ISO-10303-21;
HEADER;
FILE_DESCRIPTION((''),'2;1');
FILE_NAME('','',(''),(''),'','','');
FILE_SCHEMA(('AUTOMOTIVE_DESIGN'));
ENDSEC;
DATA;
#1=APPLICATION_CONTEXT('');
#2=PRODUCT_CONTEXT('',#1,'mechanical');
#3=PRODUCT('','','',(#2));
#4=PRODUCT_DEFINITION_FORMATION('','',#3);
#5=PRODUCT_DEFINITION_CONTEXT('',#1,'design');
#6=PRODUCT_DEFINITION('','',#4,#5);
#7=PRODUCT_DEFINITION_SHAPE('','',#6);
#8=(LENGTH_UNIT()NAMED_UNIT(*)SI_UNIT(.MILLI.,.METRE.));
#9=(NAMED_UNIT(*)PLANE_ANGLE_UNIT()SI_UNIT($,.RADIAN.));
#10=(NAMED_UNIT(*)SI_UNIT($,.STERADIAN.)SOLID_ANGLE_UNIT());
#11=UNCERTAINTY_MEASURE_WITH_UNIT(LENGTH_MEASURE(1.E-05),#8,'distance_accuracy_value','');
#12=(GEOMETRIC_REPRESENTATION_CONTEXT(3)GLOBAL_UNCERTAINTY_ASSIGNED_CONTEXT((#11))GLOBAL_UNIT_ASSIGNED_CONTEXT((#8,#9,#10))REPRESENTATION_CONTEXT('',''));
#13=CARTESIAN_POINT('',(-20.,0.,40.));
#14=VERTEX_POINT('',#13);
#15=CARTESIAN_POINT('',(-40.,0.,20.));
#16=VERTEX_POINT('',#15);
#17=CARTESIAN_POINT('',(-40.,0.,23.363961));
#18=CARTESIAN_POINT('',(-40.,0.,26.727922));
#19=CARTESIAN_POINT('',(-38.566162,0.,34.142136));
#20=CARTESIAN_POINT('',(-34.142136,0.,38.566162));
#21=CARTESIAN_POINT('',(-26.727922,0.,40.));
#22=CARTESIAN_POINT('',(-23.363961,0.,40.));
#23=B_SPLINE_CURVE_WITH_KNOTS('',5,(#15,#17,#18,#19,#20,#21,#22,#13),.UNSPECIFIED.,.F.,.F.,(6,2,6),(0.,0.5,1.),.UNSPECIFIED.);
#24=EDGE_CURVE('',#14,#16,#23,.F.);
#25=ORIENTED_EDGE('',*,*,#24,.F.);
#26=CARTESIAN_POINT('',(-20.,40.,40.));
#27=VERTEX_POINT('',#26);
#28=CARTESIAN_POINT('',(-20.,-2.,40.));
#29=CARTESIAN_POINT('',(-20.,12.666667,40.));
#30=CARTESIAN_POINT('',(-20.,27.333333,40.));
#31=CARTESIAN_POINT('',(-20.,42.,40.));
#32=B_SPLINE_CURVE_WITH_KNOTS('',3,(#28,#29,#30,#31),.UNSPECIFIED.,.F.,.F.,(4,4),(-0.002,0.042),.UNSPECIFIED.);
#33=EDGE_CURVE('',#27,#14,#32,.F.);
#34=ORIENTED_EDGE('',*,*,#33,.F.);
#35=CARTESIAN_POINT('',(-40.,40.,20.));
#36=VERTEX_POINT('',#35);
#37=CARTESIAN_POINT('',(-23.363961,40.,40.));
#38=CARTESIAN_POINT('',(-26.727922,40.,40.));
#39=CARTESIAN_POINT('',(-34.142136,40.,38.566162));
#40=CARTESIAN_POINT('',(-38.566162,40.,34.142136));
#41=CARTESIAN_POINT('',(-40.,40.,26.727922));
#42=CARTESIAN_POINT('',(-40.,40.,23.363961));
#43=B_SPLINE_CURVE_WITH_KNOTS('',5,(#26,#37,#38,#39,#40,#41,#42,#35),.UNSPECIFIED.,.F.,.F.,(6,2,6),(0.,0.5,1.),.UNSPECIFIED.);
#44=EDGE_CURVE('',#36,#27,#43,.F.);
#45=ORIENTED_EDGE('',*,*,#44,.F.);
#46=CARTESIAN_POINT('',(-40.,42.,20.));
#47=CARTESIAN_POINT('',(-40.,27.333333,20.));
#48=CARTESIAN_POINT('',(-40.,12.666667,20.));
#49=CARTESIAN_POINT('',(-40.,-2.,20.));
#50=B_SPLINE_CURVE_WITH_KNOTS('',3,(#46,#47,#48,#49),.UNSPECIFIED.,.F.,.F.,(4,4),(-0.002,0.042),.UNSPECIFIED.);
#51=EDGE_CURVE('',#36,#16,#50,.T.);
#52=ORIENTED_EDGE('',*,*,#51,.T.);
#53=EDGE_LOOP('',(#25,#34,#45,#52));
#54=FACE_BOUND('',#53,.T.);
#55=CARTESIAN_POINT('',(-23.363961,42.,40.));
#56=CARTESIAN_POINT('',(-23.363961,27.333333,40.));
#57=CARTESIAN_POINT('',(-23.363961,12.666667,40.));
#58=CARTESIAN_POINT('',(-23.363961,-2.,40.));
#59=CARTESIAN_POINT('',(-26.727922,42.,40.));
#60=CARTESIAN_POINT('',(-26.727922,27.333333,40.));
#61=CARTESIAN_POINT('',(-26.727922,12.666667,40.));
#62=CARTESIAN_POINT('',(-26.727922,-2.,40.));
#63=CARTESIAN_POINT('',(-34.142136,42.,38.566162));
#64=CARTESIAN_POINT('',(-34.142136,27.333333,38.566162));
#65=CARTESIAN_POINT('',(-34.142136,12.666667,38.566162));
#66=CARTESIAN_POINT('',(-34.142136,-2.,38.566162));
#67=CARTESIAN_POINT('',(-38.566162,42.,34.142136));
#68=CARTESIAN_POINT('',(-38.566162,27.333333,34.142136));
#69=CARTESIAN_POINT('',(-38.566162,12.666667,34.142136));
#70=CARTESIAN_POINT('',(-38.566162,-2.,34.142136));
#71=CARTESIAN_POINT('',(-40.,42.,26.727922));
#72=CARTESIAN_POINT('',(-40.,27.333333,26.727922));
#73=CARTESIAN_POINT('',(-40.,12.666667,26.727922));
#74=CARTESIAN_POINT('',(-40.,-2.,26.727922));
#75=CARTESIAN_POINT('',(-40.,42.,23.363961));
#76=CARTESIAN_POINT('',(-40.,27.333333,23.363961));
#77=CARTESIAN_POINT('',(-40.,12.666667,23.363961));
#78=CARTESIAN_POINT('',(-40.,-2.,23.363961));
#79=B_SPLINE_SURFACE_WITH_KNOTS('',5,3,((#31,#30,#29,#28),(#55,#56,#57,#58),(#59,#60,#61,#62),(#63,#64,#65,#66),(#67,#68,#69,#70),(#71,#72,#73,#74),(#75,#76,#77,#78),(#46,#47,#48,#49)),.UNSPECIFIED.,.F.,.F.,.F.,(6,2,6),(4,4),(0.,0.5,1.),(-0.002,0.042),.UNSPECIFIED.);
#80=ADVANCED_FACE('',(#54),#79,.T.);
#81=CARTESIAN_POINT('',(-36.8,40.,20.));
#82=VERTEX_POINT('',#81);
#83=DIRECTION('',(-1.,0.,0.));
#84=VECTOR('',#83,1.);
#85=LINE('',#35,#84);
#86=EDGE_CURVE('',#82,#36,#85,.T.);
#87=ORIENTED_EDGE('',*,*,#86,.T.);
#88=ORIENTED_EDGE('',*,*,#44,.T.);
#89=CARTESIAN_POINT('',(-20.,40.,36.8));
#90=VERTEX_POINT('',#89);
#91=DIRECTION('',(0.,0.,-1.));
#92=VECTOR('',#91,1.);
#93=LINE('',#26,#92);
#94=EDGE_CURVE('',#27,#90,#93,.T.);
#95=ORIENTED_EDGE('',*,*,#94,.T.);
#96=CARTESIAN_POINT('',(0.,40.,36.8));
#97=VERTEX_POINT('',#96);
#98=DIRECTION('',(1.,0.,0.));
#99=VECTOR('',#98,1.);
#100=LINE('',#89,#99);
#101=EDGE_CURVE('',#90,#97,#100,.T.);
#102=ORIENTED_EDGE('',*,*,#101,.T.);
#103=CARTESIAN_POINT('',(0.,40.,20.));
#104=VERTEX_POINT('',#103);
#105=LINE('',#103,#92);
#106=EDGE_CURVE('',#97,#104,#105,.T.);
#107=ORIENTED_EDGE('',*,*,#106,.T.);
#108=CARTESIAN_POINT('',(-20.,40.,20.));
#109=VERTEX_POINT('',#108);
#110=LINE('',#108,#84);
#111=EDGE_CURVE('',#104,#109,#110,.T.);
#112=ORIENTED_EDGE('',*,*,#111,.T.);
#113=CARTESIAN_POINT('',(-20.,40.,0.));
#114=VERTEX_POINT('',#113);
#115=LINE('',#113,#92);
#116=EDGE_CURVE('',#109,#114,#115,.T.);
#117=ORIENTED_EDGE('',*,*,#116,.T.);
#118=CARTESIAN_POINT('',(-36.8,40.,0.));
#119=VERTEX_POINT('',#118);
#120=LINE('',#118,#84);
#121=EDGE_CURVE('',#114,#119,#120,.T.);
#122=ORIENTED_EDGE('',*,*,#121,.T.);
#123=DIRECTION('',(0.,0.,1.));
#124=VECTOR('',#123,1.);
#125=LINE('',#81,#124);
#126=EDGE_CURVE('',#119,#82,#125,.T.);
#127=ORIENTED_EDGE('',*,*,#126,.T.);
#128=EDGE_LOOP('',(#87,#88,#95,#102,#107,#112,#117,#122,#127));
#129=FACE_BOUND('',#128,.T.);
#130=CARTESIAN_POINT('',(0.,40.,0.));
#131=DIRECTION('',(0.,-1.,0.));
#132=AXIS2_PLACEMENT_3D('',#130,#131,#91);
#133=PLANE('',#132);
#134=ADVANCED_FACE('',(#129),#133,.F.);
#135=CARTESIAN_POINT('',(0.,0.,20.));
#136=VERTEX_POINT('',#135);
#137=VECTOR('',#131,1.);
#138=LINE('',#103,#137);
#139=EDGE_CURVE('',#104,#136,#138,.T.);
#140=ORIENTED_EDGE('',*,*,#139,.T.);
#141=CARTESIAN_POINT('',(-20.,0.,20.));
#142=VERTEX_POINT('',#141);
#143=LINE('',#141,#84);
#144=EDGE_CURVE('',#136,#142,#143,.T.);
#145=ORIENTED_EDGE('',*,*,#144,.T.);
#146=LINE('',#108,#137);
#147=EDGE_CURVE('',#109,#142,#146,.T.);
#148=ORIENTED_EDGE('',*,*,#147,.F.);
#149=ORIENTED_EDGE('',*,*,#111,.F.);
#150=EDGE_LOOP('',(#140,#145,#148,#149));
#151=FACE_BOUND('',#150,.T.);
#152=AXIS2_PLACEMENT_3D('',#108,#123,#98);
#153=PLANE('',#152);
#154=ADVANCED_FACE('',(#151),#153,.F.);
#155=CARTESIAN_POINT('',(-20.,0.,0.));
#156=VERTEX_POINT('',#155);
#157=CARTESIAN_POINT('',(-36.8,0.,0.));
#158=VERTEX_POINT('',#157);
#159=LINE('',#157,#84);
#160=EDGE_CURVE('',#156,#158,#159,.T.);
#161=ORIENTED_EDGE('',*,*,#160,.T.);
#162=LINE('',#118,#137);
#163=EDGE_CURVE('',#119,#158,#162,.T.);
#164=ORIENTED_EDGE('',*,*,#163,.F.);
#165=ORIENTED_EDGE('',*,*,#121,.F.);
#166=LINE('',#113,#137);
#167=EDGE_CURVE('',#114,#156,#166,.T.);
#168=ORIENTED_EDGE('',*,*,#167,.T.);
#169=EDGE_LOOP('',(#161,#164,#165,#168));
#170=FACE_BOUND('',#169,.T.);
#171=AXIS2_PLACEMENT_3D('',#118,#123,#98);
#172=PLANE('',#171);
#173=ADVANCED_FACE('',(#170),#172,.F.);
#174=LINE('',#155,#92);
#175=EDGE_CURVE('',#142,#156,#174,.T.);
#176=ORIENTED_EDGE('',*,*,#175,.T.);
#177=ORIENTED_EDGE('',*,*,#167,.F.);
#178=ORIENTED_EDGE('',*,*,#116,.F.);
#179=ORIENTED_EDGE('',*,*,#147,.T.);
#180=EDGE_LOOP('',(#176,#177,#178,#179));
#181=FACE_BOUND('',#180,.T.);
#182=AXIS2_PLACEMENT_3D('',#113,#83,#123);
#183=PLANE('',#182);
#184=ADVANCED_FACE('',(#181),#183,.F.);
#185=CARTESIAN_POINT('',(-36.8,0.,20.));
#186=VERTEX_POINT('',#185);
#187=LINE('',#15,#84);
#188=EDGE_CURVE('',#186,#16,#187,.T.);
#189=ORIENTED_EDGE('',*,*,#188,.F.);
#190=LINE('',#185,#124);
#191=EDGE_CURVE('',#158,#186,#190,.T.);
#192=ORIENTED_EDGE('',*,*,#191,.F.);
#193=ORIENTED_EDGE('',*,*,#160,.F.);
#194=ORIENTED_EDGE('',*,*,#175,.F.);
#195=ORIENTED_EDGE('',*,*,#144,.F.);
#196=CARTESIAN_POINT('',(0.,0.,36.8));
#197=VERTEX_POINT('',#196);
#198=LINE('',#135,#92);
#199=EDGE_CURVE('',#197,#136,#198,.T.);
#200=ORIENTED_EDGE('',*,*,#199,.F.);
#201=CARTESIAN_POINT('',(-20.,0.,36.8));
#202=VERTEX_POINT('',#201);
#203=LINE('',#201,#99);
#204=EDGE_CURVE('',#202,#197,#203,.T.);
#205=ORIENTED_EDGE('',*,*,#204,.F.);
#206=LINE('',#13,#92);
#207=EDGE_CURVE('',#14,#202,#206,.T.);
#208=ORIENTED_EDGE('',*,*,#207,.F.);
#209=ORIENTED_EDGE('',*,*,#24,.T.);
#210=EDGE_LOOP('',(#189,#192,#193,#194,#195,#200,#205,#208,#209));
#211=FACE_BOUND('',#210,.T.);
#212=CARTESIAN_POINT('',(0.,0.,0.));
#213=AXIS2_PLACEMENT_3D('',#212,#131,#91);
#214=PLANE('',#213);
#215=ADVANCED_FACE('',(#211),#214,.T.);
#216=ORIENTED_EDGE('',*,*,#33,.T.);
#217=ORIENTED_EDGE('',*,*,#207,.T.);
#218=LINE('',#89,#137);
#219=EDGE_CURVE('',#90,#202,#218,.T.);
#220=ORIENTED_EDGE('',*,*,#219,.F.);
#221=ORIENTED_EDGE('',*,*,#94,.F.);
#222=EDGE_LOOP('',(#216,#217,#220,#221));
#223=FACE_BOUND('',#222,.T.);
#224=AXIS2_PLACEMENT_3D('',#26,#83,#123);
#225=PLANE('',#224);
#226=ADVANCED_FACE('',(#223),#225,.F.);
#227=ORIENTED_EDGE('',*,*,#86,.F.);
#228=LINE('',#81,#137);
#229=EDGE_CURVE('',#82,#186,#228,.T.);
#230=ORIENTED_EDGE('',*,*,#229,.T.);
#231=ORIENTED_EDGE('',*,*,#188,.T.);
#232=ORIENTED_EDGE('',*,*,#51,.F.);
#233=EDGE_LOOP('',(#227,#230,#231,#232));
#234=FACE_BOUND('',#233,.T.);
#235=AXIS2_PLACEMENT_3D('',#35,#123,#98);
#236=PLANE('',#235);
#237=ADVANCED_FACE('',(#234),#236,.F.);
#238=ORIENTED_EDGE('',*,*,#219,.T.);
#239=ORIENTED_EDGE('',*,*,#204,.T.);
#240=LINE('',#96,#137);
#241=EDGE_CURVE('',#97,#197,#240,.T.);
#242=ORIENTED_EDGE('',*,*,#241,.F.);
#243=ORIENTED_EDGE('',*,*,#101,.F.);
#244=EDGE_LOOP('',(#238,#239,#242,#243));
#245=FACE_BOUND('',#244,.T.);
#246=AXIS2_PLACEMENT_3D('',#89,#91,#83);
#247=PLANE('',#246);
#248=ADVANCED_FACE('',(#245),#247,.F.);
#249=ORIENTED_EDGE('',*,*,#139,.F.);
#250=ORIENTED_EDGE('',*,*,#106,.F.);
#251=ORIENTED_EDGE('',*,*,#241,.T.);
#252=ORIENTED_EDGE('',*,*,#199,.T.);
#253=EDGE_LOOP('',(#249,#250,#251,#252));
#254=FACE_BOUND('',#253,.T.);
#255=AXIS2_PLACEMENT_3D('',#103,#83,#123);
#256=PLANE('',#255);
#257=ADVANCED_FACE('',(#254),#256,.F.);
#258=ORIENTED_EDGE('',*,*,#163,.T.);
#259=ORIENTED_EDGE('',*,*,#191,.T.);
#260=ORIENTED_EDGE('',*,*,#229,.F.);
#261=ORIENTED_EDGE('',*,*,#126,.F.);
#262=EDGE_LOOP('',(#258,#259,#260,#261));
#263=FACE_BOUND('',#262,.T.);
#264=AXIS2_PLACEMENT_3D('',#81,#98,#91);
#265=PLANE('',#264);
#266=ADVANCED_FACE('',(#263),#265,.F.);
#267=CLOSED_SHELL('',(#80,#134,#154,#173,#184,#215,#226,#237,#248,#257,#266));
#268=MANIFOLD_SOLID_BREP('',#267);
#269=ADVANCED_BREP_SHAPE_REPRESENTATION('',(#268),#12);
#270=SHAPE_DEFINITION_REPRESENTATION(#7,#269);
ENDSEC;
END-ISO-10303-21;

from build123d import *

# Parameters (mm, degrees)
BOSS_EXTRUDE1_DEPTH = 40
FILLET1_SIZE        = 20


with BuildPart() as part:
    # Sketch2 → Boss-Extrude1 (new body)
    with BuildSketch(Plane(origin=(0, 0, 0), x_dir=(1, 0, 0), z_dir=(0, 1, 0))):
        Polygon((-20, -40), (-20, -36.8), (0, -36.8), (0, -20), (-20, -20), (-20, 0), (-36.8, 0), (-36.8, -20), (-40, -20), (-40, -40), align=None)
    extrude(amount=BOSS_EXTRUDE1_DEPTH)

    # Fillet1
    # a fillet whose section is not a circle: 20 mm, written as the material it takes off along each edge
    with BuildSketch(Plane(origin=(-40, -50, 40), x_dir=(0, 0, -1), z_dir=(0, 1, 0))) as fillet1_piece_1:
        with BuildLine():
            add(Edge.make_bspline([(FILLET1_SIZE, 0), (FILLET1_SIZE * 0.831801948466, 0), (FILLET1_SIZE * 0.663603896932, 0), (FILLET1_SIZE * 0.292893218813, -FILLET1_SIZE * 0.0716919198361), (FILLET1_SIZE * 0.0716919198361, -FILLET1_SIZE * 0.292893218813), (0, -FILLET1_SIZE * 0.663603896932), (0, -FILLET1_SIZE * 0.831801948466), (0, -FILLET1_SIZE)], knots=[0, 0, 0, 0, 0, 0, 0.5, 0.5, 1, 1, 1, 1, 1, 1], degree=5))
            Line((0, -FILLET1_SIZE), (0, 0))
            Line((0, 0), (FILLET1_SIZE, 0))
        make_face()
    extrude(amount=140, mode=Mode.SUBTRACT)


solid = part.part
